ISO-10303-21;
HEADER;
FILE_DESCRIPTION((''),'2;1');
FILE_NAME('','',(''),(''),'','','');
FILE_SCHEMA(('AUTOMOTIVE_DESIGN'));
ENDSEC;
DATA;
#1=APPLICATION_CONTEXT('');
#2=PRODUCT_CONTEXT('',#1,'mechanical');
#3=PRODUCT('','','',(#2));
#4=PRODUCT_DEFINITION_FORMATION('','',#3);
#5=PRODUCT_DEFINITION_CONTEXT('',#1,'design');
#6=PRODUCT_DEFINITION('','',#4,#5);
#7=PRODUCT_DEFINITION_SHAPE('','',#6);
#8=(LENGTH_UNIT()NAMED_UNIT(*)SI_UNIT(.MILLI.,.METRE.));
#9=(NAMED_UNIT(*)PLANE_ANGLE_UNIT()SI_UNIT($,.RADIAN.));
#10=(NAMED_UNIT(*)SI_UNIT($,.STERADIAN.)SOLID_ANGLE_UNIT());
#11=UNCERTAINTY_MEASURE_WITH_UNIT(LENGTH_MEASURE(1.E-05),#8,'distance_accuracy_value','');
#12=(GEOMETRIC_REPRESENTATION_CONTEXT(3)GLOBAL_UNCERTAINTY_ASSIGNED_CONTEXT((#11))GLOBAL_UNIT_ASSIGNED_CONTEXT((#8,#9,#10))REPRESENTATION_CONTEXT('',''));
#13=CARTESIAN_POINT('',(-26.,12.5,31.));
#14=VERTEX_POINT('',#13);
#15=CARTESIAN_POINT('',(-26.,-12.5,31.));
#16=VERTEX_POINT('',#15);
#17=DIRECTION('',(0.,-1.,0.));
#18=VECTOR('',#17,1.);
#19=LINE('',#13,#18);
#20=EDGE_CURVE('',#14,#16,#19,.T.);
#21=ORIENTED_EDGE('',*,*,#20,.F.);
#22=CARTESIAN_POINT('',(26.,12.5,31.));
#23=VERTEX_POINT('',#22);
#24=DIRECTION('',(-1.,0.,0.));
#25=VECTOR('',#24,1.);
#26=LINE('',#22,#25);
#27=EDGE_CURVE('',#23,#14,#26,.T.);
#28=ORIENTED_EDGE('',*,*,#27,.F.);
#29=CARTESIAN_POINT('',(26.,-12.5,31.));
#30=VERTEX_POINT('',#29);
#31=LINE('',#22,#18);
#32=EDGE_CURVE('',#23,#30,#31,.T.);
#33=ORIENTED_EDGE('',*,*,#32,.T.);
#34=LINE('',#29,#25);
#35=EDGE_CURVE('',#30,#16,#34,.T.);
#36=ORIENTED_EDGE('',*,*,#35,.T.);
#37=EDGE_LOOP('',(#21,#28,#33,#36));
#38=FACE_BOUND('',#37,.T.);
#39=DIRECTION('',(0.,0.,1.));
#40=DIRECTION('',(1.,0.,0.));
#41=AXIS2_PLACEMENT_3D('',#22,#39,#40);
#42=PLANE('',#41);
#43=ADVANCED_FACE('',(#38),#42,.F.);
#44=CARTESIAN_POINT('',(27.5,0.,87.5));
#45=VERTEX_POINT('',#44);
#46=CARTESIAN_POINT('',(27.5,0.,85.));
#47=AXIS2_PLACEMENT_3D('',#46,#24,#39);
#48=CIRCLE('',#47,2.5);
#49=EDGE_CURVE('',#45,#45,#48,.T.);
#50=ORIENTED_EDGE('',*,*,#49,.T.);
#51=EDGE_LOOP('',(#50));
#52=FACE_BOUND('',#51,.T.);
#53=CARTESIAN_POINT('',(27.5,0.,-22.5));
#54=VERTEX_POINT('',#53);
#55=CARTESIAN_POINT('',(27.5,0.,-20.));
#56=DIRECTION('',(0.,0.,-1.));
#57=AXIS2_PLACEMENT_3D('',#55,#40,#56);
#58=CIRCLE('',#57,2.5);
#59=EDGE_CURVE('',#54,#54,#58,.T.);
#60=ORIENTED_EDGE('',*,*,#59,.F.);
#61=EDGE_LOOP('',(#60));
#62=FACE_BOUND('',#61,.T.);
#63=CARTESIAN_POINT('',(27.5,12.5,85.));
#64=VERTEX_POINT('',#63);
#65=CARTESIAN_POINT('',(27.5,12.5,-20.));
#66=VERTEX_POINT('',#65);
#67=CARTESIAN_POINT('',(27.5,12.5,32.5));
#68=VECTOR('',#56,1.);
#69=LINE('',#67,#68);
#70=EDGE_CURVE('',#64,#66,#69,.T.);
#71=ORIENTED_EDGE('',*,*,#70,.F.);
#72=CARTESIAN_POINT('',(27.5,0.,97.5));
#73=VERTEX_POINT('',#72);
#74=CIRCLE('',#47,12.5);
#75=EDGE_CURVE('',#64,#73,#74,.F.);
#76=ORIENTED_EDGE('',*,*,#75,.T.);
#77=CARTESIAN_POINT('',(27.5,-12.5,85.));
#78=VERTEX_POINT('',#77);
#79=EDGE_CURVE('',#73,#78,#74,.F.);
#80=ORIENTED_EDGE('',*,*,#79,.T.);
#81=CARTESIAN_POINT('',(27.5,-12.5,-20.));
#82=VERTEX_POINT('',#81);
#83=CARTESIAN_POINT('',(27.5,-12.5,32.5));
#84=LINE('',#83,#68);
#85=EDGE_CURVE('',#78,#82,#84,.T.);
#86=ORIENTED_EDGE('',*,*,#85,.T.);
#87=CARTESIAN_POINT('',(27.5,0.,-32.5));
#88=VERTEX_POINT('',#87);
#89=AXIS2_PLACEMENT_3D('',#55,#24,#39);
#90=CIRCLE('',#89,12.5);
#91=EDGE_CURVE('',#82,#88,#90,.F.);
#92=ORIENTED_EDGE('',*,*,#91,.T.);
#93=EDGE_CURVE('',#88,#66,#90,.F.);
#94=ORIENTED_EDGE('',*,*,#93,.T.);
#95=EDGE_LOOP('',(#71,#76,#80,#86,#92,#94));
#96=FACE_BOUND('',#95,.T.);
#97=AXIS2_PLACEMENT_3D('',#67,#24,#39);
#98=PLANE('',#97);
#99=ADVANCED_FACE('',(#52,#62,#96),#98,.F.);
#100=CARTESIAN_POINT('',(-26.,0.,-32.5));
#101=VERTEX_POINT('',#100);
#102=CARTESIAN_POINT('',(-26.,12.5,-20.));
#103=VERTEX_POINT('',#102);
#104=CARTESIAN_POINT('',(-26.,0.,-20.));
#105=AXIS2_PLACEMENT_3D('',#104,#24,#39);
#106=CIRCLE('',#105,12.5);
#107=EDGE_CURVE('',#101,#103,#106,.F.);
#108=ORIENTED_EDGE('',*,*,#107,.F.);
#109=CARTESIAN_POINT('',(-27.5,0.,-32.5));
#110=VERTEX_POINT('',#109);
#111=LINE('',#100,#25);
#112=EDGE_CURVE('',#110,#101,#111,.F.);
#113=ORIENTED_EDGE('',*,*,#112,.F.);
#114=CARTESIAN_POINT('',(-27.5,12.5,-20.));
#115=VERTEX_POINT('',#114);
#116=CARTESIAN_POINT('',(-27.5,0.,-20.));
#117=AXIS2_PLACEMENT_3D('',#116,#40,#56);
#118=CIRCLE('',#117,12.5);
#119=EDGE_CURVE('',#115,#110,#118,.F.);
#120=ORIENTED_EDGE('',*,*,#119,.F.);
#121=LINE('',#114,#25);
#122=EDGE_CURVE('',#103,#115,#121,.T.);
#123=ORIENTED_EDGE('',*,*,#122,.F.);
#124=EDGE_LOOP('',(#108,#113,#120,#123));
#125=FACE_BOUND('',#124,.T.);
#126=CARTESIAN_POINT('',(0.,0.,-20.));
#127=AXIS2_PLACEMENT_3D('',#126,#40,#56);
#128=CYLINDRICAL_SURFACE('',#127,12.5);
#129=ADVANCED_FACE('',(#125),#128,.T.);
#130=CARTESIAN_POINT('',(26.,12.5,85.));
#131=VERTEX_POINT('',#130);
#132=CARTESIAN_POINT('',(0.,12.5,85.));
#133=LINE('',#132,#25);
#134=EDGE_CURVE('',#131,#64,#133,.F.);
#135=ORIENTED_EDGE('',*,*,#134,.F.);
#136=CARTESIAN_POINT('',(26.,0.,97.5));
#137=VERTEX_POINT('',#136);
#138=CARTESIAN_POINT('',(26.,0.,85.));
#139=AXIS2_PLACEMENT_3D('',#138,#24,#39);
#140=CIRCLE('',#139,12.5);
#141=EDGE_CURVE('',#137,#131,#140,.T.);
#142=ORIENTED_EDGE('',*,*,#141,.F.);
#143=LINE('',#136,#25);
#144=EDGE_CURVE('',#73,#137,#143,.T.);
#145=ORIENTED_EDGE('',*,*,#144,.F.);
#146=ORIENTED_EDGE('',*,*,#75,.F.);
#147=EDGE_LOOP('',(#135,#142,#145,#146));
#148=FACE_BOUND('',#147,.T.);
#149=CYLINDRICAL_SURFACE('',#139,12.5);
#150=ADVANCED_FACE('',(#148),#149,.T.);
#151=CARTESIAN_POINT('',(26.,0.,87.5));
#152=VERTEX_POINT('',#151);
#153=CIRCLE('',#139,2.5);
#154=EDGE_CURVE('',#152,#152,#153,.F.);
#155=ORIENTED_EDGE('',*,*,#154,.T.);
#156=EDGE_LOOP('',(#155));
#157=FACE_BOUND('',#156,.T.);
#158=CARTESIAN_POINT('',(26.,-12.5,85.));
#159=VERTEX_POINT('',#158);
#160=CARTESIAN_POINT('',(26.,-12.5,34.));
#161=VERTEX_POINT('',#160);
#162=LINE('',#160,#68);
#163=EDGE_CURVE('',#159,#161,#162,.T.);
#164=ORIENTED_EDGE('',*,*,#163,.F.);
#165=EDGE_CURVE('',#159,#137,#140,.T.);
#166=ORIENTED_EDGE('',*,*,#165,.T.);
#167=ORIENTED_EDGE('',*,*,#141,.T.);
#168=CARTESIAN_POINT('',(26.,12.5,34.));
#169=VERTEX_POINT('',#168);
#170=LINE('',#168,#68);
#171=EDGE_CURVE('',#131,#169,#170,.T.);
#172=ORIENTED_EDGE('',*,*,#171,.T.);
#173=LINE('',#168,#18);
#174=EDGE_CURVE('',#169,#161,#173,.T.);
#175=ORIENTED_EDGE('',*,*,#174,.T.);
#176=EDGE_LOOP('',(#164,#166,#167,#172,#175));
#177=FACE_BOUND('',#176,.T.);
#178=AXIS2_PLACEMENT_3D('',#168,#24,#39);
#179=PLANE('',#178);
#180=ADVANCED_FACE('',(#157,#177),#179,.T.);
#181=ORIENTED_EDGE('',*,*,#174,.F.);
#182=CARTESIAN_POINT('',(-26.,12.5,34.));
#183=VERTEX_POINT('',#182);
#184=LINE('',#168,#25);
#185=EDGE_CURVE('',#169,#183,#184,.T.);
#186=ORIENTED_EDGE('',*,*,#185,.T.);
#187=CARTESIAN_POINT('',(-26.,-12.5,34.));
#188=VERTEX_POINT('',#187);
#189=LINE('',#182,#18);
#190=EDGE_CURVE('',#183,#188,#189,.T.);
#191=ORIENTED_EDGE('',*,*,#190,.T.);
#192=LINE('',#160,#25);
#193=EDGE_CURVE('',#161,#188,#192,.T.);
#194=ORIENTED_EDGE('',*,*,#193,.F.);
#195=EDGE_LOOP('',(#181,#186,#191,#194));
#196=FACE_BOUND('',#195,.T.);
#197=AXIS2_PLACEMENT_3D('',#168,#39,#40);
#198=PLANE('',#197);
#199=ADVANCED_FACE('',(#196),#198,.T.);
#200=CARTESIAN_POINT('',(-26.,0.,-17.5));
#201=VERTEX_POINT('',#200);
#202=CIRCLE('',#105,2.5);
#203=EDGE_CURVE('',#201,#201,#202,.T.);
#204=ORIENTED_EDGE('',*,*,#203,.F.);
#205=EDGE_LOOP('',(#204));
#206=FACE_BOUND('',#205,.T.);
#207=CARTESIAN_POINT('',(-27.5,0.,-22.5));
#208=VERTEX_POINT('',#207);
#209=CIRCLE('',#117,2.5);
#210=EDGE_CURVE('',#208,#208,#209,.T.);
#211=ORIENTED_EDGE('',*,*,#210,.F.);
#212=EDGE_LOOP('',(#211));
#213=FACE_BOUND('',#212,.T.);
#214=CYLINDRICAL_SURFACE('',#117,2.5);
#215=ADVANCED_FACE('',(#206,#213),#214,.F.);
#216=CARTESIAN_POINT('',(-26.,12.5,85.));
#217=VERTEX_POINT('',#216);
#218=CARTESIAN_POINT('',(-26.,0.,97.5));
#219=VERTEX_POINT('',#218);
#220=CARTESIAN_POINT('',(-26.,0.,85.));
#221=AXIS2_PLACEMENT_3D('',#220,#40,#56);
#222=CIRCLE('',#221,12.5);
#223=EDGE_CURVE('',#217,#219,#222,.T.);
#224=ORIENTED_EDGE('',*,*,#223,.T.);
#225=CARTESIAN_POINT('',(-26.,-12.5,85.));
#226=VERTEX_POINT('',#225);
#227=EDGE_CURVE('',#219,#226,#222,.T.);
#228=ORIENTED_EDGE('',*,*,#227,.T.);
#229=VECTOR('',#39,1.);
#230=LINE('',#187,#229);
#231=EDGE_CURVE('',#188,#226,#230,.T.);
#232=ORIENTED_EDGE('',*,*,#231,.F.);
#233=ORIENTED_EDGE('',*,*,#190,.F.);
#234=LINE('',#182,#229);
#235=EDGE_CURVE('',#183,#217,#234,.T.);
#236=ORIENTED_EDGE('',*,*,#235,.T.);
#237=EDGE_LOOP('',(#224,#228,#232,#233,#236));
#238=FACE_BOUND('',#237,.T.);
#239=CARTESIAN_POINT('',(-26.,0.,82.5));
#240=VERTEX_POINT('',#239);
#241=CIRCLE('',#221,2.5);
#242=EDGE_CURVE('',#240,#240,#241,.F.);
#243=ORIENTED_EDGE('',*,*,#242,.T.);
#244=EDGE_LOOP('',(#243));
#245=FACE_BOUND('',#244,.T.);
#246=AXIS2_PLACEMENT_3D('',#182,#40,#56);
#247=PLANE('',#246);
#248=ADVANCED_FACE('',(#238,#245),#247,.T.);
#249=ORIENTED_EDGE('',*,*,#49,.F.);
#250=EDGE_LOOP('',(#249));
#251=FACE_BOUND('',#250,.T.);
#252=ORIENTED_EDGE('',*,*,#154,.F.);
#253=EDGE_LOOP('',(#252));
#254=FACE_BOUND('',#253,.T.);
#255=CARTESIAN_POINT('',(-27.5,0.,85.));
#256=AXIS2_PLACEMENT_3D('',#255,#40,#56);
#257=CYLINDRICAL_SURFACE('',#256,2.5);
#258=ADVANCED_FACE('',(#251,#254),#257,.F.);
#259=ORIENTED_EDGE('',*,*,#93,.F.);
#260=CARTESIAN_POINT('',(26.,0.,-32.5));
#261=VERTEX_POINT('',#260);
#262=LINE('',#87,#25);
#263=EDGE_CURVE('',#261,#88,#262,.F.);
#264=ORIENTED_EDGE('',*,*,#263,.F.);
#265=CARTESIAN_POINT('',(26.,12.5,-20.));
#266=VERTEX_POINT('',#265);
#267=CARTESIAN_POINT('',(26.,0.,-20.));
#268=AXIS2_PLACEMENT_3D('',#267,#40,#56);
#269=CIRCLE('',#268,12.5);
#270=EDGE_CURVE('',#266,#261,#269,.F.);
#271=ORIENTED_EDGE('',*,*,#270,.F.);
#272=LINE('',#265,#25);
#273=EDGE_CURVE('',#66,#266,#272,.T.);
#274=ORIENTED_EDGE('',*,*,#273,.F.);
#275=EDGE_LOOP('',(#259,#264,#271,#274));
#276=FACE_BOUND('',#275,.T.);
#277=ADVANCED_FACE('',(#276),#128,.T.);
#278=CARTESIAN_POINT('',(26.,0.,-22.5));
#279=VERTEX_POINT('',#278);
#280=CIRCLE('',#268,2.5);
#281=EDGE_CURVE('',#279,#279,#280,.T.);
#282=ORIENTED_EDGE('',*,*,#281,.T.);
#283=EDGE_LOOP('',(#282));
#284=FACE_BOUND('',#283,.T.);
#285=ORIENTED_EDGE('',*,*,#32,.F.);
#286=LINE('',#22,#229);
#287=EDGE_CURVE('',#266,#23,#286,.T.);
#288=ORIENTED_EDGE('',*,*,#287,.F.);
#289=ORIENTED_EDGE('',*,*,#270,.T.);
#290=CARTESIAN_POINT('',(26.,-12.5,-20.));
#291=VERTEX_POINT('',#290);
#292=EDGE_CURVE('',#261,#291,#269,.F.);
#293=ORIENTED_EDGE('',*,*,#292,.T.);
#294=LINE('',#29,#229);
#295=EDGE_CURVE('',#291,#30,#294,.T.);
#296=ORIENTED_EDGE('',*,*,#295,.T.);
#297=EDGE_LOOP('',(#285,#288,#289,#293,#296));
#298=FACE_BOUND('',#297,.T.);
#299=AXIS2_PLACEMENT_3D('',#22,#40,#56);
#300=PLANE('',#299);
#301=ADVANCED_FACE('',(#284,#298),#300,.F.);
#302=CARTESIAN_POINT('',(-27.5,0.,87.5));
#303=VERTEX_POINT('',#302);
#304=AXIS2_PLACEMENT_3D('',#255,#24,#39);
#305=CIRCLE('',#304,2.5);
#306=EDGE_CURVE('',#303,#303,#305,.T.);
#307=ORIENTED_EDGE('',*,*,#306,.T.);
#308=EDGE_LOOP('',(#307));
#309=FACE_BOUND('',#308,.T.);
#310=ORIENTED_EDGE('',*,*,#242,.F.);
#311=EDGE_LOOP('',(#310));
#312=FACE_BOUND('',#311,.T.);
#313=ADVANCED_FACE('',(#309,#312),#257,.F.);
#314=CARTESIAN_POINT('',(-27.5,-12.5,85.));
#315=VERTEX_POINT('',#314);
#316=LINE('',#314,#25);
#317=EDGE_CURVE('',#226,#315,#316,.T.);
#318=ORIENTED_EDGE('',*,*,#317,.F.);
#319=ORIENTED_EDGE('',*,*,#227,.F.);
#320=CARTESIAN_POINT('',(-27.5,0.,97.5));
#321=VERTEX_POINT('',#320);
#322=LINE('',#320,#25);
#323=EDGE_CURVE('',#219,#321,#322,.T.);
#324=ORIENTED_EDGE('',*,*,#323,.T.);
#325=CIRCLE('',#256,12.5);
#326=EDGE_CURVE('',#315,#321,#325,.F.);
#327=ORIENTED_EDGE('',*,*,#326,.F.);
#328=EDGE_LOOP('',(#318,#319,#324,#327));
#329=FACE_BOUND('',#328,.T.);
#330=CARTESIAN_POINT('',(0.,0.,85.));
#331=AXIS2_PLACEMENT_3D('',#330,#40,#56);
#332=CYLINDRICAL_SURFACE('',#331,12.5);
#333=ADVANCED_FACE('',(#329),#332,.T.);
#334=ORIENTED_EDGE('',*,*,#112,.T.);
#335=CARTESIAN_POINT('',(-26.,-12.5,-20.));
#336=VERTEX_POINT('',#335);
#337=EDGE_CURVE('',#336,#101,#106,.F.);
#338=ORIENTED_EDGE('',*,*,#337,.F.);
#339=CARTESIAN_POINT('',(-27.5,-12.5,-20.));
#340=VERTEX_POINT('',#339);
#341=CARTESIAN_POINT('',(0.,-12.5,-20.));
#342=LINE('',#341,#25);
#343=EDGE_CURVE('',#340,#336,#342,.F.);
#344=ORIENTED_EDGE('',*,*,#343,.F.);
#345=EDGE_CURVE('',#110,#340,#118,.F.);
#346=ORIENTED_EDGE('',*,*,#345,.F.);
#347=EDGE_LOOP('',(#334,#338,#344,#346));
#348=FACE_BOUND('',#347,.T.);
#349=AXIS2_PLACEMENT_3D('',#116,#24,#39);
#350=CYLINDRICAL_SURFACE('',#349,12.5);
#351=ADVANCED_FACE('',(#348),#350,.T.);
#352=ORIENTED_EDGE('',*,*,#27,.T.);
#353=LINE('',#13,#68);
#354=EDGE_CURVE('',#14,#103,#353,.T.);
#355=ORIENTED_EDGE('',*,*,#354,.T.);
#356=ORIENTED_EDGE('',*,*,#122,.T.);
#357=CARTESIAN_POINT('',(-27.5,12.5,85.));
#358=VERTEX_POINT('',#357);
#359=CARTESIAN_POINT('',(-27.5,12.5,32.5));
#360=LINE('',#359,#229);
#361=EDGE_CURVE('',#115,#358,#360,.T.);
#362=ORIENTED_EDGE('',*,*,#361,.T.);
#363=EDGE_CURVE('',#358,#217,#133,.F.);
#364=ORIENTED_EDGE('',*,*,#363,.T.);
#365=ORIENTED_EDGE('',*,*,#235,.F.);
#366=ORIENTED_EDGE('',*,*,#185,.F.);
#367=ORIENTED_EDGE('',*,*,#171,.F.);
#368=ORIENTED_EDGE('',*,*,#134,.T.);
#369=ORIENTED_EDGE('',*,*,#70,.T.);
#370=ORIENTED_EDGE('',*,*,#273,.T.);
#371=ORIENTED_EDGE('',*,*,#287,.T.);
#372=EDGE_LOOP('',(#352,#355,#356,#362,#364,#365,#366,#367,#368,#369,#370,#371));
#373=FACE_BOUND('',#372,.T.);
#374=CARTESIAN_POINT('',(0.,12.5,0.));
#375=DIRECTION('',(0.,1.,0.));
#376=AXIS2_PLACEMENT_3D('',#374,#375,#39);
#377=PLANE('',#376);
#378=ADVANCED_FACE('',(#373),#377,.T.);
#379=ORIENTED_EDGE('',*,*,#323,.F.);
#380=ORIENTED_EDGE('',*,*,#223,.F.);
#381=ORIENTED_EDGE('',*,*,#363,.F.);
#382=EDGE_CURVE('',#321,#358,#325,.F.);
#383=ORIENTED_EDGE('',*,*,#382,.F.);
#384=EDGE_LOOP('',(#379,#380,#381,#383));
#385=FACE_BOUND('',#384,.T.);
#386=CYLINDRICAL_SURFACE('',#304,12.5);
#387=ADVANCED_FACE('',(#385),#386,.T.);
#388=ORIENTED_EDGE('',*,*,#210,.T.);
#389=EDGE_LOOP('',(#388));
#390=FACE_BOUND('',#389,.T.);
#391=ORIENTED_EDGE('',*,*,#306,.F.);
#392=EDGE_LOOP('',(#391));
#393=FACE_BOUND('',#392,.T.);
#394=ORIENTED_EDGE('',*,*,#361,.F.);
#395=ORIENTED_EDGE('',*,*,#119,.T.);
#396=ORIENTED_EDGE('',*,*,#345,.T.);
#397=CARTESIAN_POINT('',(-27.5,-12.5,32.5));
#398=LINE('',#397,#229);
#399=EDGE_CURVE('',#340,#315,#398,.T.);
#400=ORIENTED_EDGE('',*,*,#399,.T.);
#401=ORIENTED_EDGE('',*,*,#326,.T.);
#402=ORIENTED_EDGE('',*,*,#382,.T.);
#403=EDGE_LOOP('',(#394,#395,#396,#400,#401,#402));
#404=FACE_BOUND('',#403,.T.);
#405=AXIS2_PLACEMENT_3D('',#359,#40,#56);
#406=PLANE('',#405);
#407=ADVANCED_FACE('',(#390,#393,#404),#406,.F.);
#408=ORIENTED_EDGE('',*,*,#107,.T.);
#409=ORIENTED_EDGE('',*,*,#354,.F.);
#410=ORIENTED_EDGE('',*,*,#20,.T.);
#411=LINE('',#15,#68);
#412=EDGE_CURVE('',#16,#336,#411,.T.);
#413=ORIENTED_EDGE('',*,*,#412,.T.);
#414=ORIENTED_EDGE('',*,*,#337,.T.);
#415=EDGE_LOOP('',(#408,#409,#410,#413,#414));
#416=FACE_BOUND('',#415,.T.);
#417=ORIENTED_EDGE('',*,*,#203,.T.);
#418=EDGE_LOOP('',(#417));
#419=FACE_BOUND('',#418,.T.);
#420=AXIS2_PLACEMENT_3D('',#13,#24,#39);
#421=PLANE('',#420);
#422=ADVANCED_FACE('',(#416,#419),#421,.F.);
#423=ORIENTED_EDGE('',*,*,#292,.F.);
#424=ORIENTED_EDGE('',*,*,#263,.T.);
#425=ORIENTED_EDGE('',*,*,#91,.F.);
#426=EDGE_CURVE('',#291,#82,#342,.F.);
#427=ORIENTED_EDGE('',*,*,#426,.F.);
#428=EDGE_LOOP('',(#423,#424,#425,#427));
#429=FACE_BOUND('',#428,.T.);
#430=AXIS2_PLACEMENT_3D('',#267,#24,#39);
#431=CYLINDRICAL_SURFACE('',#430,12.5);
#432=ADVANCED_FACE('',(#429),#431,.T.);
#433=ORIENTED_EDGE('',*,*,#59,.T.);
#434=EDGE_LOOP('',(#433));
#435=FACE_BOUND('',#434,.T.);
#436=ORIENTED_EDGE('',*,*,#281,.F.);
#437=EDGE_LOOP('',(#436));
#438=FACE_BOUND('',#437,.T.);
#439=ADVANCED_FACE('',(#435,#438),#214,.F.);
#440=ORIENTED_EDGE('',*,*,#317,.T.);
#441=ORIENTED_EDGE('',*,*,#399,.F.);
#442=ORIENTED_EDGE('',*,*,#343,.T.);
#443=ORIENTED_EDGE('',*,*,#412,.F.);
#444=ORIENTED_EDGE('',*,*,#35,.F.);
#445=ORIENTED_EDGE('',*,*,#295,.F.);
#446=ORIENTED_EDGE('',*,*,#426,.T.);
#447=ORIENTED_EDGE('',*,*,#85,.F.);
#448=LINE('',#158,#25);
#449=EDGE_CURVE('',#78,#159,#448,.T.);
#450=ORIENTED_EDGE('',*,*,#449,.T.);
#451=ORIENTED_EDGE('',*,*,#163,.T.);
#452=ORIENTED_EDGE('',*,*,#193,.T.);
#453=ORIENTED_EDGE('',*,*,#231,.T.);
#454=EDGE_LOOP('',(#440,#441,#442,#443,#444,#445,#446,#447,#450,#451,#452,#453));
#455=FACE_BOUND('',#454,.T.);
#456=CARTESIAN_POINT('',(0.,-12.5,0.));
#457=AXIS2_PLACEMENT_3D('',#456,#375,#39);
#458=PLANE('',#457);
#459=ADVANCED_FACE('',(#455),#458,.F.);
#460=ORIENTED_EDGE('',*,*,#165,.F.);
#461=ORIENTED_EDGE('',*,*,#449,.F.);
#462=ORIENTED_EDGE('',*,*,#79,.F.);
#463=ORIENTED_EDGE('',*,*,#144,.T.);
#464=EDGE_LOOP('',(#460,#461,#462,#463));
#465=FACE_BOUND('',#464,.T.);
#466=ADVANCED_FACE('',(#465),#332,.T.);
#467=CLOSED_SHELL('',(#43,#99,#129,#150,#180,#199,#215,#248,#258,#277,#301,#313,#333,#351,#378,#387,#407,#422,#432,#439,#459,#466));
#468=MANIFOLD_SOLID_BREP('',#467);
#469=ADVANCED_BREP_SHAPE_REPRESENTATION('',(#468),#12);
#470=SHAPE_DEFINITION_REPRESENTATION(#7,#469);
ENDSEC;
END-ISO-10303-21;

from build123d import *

# Parameters (mm, degrees)
BOSS_EXTRUDE1_DEPTH  = 12.5
FILLET1_R            = 12.5
SKETCH2_R            = 2.5
CUT_EXTRUDE1_DEPTH   = 45.370598373
FILLET1_OF_MIRROR1_R = 12.5


with BuildPart() as part:
    # Sketch1 → Boss-Extrude1 (new, symmetric)
    with BuildSketch(Plane(origin=(0, 0, 0), x_dir=(1, 0, 0), z_dir=(0, 1, 0))):
        Polygon((26, -31), (26, 32.5), (27.5, 32.5), (27.5, -32.5), (-27.5, -32.5), (-27.5, 32.5), (-26, 32.5), (-26, -31), align=None)
    boss_extrude1 = extrude(amount=BOSS_EXTRUDE1_DEPTH, both=True)

    # Fillet1
    fillet1_edges = [part.edges().sort_by_distance(p)[0] for p in [
        (-26.75, -12.5, -32.5),
        (-26.75, 12.5, -32.5),
        (26.75, -12.5, -32.5),
        (26.75, 12.5, -32.5),
    ]]
    fillet(fillet1_edges, radius=FILLET1_R - 0.0001)  # a hair under: the kernel refuses the full size

    # Sketch2 → Cut-Extrude1 (cut, symmetric)
    with BuildSketch(Plane(origin=(0, 0, 0), x_dir=(0, 0, -1), z_dir=(1, 0, 0))):
        with Locations((20, 0)):
            Circle(SKETCH2_R)
    cut_extrude1 = extrude(amount=CUT_EXTRUDE1_DEPTH, both=True, mode=Mode.SUBTRACT)

    # Mirror1: Boss-Extrude1, Cut-Extrude1 across plane
    add(boss_extrude1.mirror(Plane(origin=(27.5, 12.5, 32.5), x_dir=(1, 0, 0), z_dir=(0, 0, -1))))
    add(cut_extrude1.mirror(Plane(origin=(27.5, 12.5, 32.5), x_dir=(1, 0, 0), z_dir=(0, 0, -1))), mode=Mode.SUBTRACT)

    # Fillet1 of Mirror1
    fillet1_of_mirror1_edges = [part.edges().sort_by_distance(p)[0] for p in [
        (-26.75, -12.5, 97.5),
        (-26.75, 12.5, 97.5),
        (26.75, -12.5, 97.5),
        (26.75, 12.5, 97.5),
    ]]
    fillet(fillet1_of_mirror1_edges, radius=FILLET1_OF_MIRROR1_R - 0.0001)  # a hair under: the kernel refuses the full size


solid = part.part
